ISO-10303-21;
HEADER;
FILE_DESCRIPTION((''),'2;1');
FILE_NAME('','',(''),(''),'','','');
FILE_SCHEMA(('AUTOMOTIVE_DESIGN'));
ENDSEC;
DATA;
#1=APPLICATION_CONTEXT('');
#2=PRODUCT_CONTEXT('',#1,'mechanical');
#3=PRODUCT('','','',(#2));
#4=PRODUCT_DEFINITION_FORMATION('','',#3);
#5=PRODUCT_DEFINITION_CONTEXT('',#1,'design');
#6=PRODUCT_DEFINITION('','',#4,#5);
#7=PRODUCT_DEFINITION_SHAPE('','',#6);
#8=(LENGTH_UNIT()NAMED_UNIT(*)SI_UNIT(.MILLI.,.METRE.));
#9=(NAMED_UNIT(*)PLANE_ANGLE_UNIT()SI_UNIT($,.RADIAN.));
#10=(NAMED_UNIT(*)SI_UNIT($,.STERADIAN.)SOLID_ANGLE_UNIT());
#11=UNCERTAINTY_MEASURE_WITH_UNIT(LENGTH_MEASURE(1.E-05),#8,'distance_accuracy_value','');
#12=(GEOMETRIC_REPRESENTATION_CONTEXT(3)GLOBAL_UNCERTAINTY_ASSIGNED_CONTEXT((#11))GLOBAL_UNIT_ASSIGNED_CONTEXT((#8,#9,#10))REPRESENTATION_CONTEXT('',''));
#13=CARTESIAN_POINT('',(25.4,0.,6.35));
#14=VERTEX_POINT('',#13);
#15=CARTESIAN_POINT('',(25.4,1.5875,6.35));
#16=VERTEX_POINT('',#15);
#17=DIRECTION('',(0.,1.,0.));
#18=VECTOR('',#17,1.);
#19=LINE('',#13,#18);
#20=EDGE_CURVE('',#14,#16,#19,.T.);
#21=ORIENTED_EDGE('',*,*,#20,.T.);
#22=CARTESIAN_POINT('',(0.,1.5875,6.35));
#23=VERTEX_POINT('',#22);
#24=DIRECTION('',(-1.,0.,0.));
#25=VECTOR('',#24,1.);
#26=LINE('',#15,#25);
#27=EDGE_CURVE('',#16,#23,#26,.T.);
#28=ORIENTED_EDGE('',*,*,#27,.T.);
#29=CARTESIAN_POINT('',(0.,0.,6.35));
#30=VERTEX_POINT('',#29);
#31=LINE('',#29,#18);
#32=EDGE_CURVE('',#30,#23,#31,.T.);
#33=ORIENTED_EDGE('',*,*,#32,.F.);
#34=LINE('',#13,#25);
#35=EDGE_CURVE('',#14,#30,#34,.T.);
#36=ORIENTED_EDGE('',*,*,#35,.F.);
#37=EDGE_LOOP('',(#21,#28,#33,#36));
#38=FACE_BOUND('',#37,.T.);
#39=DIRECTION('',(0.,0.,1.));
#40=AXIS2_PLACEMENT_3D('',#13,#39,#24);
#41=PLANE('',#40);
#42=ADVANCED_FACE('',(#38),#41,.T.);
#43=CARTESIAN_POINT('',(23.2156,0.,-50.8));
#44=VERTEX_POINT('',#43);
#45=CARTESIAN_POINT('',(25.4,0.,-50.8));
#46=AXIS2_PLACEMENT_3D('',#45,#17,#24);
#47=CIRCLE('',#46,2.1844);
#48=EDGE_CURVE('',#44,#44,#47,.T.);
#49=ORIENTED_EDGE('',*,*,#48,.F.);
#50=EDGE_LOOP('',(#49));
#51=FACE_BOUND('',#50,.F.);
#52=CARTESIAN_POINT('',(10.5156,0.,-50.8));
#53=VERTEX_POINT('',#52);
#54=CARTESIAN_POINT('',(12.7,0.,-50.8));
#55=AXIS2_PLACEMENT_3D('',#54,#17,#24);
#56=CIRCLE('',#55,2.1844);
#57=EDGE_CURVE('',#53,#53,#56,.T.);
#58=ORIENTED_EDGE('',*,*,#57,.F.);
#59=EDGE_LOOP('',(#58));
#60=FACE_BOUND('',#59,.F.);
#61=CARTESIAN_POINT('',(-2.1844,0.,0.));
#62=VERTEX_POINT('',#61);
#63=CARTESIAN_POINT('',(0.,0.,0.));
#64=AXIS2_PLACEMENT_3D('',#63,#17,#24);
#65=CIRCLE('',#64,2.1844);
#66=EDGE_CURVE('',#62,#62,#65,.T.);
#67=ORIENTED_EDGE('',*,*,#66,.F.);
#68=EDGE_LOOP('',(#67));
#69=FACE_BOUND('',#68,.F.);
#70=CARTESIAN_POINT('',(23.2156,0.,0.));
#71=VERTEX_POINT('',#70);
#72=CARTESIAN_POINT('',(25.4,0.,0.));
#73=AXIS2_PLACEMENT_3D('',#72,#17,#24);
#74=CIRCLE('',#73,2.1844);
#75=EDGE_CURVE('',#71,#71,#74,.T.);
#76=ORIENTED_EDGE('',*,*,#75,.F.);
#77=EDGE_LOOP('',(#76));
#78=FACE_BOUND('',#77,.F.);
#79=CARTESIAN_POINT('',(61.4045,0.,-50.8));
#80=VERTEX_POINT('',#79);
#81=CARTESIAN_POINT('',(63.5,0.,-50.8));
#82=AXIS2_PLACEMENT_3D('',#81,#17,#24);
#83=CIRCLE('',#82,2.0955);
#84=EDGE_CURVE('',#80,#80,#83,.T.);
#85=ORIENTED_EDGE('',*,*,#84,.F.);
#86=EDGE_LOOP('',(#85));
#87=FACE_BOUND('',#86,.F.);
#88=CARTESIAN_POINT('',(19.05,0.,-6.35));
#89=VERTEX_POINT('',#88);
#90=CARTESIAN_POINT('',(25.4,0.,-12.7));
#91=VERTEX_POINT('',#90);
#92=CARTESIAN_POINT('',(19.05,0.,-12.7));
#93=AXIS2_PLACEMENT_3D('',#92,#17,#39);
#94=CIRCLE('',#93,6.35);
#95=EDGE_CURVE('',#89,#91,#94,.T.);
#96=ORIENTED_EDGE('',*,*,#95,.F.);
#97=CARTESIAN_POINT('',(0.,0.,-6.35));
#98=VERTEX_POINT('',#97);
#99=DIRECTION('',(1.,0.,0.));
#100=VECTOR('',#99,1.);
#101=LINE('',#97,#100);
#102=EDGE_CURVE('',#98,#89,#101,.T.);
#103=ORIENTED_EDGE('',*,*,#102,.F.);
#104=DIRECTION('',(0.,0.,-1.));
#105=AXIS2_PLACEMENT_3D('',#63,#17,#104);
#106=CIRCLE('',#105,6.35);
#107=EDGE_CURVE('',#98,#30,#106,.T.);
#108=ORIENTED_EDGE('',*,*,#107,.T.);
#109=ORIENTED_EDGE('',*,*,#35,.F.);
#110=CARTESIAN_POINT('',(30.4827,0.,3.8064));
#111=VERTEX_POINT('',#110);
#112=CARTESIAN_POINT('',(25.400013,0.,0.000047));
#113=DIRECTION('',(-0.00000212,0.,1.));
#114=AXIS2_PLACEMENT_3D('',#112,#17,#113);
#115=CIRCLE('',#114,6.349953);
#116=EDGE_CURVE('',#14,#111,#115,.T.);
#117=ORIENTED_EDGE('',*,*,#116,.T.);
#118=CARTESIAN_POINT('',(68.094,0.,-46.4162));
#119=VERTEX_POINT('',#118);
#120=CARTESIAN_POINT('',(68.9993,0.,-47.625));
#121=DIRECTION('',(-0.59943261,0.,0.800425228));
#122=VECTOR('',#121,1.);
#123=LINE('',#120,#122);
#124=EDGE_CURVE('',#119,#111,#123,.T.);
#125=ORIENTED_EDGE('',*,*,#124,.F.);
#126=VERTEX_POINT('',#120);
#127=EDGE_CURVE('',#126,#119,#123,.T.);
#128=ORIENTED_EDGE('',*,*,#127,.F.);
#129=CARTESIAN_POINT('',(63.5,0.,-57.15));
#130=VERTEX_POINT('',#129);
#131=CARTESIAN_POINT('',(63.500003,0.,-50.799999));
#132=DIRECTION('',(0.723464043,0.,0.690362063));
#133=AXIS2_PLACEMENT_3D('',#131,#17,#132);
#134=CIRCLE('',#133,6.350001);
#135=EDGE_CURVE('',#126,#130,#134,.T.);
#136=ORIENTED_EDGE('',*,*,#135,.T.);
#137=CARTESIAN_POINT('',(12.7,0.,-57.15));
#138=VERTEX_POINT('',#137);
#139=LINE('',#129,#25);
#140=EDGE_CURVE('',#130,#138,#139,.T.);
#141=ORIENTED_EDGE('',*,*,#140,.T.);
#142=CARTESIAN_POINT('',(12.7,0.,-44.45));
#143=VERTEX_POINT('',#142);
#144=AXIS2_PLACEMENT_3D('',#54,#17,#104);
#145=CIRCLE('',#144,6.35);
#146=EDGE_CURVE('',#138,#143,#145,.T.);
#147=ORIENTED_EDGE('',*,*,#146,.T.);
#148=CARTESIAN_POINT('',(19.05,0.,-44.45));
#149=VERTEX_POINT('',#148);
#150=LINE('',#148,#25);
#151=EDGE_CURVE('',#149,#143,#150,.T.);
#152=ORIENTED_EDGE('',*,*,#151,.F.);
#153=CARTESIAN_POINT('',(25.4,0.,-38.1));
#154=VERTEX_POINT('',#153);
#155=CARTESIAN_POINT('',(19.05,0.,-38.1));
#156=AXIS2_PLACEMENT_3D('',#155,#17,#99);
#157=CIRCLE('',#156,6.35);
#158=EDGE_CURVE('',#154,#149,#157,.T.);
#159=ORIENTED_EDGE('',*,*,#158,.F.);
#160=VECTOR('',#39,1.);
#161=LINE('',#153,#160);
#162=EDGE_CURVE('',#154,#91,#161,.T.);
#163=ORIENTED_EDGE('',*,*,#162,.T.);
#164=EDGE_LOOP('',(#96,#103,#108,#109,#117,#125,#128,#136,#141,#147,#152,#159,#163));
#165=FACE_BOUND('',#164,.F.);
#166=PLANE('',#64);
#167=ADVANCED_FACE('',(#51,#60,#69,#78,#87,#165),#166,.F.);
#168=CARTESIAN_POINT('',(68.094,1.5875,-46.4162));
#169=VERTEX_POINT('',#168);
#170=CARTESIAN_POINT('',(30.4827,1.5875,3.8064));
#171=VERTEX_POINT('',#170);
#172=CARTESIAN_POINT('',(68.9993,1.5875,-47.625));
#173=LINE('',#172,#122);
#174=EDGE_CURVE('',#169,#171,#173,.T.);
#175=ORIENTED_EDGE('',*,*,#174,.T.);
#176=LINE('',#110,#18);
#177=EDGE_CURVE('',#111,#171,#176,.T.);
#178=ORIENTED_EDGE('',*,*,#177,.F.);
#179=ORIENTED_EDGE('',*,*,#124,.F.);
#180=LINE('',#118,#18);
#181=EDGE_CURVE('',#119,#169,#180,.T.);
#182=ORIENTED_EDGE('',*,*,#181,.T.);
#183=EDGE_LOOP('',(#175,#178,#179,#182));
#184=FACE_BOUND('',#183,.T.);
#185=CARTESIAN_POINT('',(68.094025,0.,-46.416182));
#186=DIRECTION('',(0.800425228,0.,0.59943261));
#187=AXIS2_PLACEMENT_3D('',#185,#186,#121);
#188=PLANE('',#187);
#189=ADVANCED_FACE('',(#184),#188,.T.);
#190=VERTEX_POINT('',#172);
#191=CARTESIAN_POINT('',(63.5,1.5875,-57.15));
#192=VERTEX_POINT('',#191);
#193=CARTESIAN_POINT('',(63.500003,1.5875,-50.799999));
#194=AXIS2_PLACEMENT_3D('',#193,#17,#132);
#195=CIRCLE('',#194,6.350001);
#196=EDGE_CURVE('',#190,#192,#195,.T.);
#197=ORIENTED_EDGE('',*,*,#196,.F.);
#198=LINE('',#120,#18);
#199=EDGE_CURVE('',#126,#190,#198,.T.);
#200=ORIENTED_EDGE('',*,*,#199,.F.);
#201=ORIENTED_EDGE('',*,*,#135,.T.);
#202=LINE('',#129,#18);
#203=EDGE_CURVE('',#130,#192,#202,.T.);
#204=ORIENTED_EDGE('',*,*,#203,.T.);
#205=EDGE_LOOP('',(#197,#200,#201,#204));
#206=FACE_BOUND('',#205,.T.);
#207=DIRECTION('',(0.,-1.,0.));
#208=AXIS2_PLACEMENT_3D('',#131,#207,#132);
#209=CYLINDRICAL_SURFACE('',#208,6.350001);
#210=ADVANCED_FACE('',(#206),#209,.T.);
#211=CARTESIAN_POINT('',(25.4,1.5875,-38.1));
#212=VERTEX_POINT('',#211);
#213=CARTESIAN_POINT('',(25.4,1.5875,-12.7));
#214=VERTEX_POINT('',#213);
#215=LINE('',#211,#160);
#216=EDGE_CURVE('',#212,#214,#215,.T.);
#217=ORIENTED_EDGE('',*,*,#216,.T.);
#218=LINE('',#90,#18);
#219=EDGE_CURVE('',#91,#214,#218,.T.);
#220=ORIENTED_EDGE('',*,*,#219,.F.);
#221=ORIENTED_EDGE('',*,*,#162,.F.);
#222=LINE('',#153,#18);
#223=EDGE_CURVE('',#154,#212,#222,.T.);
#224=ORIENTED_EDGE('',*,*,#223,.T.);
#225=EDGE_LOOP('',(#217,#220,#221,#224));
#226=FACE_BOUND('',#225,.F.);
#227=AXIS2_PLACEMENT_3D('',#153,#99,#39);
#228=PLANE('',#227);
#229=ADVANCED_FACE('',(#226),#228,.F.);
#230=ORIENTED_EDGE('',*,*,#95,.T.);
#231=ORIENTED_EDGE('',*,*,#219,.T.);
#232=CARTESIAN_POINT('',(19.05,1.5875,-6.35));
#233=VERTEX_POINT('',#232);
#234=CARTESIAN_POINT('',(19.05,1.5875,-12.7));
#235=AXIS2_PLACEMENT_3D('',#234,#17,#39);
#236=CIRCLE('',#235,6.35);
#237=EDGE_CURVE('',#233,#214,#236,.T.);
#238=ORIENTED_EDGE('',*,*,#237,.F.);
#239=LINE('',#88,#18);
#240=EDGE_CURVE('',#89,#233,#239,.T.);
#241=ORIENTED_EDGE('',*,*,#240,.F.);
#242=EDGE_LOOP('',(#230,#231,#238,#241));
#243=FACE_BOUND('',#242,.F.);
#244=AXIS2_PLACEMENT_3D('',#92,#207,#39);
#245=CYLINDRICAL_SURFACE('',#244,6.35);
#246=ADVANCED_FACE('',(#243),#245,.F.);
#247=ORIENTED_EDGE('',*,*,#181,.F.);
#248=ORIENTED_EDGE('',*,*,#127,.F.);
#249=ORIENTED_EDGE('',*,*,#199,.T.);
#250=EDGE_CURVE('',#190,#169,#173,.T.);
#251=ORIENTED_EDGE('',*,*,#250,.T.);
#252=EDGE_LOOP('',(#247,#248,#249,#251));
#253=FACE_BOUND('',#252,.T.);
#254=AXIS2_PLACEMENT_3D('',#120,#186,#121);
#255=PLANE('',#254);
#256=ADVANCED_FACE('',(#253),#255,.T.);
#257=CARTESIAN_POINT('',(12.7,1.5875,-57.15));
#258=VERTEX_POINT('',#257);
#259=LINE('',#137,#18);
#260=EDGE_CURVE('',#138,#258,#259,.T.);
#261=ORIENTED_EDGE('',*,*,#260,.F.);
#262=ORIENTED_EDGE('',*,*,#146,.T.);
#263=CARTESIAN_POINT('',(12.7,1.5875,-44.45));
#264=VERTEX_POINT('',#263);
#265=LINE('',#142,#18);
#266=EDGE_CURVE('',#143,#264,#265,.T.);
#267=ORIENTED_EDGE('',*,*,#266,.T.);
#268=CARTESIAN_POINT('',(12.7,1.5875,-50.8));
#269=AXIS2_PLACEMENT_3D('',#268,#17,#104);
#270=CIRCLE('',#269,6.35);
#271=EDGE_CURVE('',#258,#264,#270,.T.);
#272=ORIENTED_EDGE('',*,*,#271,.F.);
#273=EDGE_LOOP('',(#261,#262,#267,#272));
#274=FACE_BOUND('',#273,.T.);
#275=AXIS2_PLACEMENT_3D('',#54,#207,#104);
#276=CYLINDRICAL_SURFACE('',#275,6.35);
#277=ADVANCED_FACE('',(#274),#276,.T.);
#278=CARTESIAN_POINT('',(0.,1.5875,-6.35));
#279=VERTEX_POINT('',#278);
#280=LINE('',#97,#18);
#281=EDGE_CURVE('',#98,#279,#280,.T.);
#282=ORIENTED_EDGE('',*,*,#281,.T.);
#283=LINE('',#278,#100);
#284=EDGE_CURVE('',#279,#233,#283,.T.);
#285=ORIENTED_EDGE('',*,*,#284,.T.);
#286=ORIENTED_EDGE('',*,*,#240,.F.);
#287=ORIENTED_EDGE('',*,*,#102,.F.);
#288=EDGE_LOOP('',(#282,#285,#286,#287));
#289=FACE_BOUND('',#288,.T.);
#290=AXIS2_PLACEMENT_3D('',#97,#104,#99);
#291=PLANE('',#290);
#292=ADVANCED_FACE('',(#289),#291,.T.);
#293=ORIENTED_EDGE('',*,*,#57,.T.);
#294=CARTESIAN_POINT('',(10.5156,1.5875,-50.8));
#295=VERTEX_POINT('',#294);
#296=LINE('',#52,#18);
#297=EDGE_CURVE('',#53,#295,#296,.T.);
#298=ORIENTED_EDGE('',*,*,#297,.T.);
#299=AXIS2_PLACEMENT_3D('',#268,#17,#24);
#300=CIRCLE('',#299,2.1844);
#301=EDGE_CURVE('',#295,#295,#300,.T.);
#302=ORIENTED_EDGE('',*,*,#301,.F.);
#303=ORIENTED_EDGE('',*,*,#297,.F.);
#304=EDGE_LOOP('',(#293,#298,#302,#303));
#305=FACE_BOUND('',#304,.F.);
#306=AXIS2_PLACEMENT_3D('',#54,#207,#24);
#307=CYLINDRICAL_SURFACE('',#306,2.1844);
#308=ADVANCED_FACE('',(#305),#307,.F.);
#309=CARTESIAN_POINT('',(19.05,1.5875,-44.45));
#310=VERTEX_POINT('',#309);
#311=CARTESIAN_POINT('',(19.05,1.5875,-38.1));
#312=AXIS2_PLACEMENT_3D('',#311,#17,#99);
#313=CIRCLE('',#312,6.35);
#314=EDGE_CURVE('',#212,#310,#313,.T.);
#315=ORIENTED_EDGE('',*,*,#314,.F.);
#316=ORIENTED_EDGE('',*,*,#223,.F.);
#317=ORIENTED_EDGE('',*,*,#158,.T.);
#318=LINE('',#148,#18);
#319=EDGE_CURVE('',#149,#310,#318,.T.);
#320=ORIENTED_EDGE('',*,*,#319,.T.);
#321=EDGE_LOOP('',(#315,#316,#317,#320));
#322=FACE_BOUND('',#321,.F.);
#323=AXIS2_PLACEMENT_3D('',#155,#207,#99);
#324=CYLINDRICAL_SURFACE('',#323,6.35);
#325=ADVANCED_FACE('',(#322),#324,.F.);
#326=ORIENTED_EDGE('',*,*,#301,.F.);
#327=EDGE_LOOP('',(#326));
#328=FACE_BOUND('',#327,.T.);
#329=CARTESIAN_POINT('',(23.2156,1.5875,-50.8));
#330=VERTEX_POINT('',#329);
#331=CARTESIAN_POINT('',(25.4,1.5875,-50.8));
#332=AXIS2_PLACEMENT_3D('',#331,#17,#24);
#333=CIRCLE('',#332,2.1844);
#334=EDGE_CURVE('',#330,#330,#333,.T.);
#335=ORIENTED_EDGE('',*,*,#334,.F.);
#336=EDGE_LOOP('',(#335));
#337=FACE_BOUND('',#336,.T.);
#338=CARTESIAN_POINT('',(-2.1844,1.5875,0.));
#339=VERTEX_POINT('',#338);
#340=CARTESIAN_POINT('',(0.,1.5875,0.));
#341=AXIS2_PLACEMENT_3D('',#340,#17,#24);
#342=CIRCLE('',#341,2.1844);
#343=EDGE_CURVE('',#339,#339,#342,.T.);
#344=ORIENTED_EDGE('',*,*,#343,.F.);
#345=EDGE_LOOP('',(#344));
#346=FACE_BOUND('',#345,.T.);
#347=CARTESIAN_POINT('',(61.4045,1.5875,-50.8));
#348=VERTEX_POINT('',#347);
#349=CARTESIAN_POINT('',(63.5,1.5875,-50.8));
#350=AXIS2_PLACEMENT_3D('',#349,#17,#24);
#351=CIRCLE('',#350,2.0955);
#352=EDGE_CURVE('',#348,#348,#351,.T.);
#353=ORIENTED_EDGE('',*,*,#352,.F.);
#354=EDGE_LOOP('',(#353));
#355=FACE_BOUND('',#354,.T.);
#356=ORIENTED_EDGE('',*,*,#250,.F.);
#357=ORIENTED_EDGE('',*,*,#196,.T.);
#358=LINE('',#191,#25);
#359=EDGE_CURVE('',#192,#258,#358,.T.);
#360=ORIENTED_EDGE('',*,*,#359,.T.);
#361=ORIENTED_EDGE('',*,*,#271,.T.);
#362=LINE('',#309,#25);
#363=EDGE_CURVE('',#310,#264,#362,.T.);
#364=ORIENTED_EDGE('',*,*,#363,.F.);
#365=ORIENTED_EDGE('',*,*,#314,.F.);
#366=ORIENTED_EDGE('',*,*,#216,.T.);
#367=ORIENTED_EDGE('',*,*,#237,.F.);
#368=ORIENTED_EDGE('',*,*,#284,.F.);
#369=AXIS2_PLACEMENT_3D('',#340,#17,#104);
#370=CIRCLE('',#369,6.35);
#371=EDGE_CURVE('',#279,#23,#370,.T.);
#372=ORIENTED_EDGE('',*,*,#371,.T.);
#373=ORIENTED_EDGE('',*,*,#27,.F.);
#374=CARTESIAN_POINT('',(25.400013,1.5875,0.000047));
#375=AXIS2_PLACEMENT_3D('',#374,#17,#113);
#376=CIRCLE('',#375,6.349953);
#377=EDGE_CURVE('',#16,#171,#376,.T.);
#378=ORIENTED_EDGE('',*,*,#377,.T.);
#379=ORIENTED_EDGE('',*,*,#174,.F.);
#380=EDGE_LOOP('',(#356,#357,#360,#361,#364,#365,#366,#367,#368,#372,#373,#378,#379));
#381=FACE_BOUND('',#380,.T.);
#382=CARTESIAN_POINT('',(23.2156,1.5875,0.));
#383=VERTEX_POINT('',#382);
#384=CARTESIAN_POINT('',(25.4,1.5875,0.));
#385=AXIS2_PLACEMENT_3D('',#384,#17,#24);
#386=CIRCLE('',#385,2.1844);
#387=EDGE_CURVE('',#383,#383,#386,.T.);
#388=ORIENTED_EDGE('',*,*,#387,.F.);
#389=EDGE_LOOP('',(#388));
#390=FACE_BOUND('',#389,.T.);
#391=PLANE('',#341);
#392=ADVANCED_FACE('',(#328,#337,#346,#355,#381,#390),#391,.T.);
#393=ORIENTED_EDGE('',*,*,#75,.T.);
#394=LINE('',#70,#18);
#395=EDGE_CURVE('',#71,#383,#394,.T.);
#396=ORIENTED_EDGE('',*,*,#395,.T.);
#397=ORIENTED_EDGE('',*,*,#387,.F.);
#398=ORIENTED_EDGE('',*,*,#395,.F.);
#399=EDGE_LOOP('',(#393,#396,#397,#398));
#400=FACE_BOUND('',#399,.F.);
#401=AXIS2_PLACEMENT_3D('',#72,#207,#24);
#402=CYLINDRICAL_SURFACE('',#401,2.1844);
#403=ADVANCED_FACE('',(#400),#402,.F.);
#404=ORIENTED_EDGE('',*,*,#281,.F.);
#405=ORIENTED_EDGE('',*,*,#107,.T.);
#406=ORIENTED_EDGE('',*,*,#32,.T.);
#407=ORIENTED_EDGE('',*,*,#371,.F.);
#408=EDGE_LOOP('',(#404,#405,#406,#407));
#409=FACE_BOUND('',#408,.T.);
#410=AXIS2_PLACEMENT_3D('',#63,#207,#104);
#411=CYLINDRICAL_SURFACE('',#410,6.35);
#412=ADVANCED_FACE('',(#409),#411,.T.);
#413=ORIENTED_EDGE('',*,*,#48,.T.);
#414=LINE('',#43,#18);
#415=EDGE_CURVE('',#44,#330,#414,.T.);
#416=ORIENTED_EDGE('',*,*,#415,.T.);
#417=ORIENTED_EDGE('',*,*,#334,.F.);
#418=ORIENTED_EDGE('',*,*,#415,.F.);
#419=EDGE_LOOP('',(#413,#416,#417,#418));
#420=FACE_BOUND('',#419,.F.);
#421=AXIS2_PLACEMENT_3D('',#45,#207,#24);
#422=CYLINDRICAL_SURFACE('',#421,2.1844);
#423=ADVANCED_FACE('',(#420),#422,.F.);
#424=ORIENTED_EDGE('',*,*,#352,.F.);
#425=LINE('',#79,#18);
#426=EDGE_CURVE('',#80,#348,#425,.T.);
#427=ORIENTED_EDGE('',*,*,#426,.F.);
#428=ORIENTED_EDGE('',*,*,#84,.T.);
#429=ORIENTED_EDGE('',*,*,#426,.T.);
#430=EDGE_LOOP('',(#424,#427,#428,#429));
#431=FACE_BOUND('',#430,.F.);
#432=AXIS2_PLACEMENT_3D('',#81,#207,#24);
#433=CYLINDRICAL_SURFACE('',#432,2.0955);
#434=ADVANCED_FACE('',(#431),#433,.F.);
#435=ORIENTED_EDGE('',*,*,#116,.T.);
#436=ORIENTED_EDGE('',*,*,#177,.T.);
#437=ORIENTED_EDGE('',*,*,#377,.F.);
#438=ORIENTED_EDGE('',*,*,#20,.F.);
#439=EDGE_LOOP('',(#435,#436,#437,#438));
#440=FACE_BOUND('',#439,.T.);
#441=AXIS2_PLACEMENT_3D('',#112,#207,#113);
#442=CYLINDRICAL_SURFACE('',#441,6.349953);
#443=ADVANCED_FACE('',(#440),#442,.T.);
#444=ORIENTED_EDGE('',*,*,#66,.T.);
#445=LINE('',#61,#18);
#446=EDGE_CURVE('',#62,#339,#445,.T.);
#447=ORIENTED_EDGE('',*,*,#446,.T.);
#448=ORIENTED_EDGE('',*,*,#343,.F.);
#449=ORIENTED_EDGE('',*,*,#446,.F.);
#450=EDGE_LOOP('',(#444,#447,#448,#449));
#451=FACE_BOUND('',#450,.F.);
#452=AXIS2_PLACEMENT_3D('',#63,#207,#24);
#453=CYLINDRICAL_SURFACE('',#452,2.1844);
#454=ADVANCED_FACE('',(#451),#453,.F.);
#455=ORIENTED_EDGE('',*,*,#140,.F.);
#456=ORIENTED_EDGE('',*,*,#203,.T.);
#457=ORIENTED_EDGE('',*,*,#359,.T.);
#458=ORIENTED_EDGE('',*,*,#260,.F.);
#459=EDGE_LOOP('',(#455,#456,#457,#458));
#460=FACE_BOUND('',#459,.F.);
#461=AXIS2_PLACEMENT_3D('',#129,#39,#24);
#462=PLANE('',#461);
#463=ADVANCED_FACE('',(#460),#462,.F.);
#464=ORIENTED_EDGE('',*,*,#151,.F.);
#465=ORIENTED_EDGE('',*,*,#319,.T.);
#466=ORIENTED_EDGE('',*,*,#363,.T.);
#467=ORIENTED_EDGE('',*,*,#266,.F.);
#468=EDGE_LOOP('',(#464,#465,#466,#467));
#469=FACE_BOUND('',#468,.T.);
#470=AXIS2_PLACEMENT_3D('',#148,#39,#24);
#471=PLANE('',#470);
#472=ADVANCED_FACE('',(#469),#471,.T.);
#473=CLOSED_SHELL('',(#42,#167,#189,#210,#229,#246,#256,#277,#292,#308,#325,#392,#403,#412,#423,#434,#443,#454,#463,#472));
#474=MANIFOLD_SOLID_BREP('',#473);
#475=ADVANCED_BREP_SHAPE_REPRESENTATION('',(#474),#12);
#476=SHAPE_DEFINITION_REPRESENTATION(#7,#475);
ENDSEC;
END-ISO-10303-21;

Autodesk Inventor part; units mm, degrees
ref_plane "YZ Plane" through (0, 0, 0) normal (1, 0, 0) x (0, 1, 0)
ref_plane "XZ Plane" through (0, 0, 0) normal (0, 1, 0) x (-1, 0, 0)
ref_plane "XY Plane" through (0, 0, 0) normal (0, 0, 1) x (1, 0, 0)
sketch "main" plane through (0, 0, 0) normal (0, 0, 1) x (1, 0, 0)
  circle A0 centre (33.5416, 32.0006) radius 2.1844
  line L0 (8.1416, 38.3506) -> (33.5416, 38.3506)
  line L1 (33.5416, 25.6506) -> (14.4916, 25.6506)
  arc A1 (33.5416, 25.6506) -> (33.5416, 38.3506) centre (33.5416, 32.0006) ccw
  circle A2 centre (8.1416, 32.0006) radius 2.1844
  arc A3 (14.4916, 25.6506) -> (8.1416, 19.3006) centre (14.4916, 19.3006) ccw
  arc A4 (8.1416, 38.3506) -> (2.462, 34.8404) centre (8.1416, 32.0006) ccw
  line L2 (8.1416, -6.0994) -> (8.1416, 19.3006)
  arc A5 (8.1416, -6.0994) -> (14.4916, -12.4494) centre (14.4916, -6.0994) ccw
  circle A6 centre (8.1416, -18.7994) radius 2.1844
  line L3 (14.4916, -12.4494) -> (20.8416, -12.4494)
  line L4 (-29.9584, -25.1494) -> (20.8416, -25.1494)
  arc A7 (20.8416, -25.1494) -> (20.8416, -12.4494) centre (20.8416, -18.7994) ccw
  circle A8 centre (20.8416, -18.7994) radius 2.1844
  circle A9 centre (-29.9584, -18.7994) radius 2.0955
  arc A10 (-34.5524, -14.4156) -> (-29.9584, -25.1494) centre (-29.9584, -18.7994) ccw
  line L5 (-35.4577, -15.6244) -> (3.0589, 35.807)
  point P0 (9.5067, 8.1196)
  point P1 (8.1416, 25.6506)
  point P2 (8.1416, -12.4494)
  dimension "d0" = 6.35
  dimension "d4" = 4.191
sketch "Sketch1" plane through (0, 0, 0) normal (0, 1, 0) x (-1, 0, 0)
  circle A0 centre (0, 0) radius 2.1844
  line L0 (-25.4, 6.35) -> (0, 6.35)
  line L1 (0, -6.35) -> (-19.05, -6.35)
  arc A1 (0, -6.35) -> (0, 6.35) centre (0, 0) ccw
  circle A2 centre (-25.4, 0) radius 2.1844
  arc A3 (-19.05, -6.35) -> (-25.4, -12.7) centre (-19.05, -12.7) ccw
  arc A4 (-25.4, 6.35) -> (-31.0796, 2.8398) centre (-25.4, 0) ccw
  line L2 (-25.4, -38.1) -> (-25.4, -12.7)
  arc A5 (-25.4, -38.1) -> (-19.05, -44.45) centre (-19.05, -38.1) ccw
  circle A6 centre (-25.4, -50.8) radius 2.1844
  line L3 (-19.05, -44.45) -> (-12.7, -44.45)
  line L4 (-63.5, -57.15) -> (-12.7, -57.15)
  arc A7 (-12.7, -57.15) -> (-12.7, -44.45) centre (-12.7, -50.8) ccw
  circle A8 centre (-12.7, -50.8) radius 2.1844
  circle A9 centre (-63.5, -50.8) radius 2.0955
  arc A10 (-68.094, -46.4162) -> (-63.5, -57.15) centre (-63.5, -50.8) ccw
  line L5 (-68.9993, -47.625) -> (-30.4827, 3.8064)
extrude "Extrusion1" add sketch "Sketch1" along normal blind 1.5875 contours L0 A1 L1 A3 L2 A5 L3 A7 L4 A10 L5 A4
properties part number "gusset" material "Acetal Resin, White"
